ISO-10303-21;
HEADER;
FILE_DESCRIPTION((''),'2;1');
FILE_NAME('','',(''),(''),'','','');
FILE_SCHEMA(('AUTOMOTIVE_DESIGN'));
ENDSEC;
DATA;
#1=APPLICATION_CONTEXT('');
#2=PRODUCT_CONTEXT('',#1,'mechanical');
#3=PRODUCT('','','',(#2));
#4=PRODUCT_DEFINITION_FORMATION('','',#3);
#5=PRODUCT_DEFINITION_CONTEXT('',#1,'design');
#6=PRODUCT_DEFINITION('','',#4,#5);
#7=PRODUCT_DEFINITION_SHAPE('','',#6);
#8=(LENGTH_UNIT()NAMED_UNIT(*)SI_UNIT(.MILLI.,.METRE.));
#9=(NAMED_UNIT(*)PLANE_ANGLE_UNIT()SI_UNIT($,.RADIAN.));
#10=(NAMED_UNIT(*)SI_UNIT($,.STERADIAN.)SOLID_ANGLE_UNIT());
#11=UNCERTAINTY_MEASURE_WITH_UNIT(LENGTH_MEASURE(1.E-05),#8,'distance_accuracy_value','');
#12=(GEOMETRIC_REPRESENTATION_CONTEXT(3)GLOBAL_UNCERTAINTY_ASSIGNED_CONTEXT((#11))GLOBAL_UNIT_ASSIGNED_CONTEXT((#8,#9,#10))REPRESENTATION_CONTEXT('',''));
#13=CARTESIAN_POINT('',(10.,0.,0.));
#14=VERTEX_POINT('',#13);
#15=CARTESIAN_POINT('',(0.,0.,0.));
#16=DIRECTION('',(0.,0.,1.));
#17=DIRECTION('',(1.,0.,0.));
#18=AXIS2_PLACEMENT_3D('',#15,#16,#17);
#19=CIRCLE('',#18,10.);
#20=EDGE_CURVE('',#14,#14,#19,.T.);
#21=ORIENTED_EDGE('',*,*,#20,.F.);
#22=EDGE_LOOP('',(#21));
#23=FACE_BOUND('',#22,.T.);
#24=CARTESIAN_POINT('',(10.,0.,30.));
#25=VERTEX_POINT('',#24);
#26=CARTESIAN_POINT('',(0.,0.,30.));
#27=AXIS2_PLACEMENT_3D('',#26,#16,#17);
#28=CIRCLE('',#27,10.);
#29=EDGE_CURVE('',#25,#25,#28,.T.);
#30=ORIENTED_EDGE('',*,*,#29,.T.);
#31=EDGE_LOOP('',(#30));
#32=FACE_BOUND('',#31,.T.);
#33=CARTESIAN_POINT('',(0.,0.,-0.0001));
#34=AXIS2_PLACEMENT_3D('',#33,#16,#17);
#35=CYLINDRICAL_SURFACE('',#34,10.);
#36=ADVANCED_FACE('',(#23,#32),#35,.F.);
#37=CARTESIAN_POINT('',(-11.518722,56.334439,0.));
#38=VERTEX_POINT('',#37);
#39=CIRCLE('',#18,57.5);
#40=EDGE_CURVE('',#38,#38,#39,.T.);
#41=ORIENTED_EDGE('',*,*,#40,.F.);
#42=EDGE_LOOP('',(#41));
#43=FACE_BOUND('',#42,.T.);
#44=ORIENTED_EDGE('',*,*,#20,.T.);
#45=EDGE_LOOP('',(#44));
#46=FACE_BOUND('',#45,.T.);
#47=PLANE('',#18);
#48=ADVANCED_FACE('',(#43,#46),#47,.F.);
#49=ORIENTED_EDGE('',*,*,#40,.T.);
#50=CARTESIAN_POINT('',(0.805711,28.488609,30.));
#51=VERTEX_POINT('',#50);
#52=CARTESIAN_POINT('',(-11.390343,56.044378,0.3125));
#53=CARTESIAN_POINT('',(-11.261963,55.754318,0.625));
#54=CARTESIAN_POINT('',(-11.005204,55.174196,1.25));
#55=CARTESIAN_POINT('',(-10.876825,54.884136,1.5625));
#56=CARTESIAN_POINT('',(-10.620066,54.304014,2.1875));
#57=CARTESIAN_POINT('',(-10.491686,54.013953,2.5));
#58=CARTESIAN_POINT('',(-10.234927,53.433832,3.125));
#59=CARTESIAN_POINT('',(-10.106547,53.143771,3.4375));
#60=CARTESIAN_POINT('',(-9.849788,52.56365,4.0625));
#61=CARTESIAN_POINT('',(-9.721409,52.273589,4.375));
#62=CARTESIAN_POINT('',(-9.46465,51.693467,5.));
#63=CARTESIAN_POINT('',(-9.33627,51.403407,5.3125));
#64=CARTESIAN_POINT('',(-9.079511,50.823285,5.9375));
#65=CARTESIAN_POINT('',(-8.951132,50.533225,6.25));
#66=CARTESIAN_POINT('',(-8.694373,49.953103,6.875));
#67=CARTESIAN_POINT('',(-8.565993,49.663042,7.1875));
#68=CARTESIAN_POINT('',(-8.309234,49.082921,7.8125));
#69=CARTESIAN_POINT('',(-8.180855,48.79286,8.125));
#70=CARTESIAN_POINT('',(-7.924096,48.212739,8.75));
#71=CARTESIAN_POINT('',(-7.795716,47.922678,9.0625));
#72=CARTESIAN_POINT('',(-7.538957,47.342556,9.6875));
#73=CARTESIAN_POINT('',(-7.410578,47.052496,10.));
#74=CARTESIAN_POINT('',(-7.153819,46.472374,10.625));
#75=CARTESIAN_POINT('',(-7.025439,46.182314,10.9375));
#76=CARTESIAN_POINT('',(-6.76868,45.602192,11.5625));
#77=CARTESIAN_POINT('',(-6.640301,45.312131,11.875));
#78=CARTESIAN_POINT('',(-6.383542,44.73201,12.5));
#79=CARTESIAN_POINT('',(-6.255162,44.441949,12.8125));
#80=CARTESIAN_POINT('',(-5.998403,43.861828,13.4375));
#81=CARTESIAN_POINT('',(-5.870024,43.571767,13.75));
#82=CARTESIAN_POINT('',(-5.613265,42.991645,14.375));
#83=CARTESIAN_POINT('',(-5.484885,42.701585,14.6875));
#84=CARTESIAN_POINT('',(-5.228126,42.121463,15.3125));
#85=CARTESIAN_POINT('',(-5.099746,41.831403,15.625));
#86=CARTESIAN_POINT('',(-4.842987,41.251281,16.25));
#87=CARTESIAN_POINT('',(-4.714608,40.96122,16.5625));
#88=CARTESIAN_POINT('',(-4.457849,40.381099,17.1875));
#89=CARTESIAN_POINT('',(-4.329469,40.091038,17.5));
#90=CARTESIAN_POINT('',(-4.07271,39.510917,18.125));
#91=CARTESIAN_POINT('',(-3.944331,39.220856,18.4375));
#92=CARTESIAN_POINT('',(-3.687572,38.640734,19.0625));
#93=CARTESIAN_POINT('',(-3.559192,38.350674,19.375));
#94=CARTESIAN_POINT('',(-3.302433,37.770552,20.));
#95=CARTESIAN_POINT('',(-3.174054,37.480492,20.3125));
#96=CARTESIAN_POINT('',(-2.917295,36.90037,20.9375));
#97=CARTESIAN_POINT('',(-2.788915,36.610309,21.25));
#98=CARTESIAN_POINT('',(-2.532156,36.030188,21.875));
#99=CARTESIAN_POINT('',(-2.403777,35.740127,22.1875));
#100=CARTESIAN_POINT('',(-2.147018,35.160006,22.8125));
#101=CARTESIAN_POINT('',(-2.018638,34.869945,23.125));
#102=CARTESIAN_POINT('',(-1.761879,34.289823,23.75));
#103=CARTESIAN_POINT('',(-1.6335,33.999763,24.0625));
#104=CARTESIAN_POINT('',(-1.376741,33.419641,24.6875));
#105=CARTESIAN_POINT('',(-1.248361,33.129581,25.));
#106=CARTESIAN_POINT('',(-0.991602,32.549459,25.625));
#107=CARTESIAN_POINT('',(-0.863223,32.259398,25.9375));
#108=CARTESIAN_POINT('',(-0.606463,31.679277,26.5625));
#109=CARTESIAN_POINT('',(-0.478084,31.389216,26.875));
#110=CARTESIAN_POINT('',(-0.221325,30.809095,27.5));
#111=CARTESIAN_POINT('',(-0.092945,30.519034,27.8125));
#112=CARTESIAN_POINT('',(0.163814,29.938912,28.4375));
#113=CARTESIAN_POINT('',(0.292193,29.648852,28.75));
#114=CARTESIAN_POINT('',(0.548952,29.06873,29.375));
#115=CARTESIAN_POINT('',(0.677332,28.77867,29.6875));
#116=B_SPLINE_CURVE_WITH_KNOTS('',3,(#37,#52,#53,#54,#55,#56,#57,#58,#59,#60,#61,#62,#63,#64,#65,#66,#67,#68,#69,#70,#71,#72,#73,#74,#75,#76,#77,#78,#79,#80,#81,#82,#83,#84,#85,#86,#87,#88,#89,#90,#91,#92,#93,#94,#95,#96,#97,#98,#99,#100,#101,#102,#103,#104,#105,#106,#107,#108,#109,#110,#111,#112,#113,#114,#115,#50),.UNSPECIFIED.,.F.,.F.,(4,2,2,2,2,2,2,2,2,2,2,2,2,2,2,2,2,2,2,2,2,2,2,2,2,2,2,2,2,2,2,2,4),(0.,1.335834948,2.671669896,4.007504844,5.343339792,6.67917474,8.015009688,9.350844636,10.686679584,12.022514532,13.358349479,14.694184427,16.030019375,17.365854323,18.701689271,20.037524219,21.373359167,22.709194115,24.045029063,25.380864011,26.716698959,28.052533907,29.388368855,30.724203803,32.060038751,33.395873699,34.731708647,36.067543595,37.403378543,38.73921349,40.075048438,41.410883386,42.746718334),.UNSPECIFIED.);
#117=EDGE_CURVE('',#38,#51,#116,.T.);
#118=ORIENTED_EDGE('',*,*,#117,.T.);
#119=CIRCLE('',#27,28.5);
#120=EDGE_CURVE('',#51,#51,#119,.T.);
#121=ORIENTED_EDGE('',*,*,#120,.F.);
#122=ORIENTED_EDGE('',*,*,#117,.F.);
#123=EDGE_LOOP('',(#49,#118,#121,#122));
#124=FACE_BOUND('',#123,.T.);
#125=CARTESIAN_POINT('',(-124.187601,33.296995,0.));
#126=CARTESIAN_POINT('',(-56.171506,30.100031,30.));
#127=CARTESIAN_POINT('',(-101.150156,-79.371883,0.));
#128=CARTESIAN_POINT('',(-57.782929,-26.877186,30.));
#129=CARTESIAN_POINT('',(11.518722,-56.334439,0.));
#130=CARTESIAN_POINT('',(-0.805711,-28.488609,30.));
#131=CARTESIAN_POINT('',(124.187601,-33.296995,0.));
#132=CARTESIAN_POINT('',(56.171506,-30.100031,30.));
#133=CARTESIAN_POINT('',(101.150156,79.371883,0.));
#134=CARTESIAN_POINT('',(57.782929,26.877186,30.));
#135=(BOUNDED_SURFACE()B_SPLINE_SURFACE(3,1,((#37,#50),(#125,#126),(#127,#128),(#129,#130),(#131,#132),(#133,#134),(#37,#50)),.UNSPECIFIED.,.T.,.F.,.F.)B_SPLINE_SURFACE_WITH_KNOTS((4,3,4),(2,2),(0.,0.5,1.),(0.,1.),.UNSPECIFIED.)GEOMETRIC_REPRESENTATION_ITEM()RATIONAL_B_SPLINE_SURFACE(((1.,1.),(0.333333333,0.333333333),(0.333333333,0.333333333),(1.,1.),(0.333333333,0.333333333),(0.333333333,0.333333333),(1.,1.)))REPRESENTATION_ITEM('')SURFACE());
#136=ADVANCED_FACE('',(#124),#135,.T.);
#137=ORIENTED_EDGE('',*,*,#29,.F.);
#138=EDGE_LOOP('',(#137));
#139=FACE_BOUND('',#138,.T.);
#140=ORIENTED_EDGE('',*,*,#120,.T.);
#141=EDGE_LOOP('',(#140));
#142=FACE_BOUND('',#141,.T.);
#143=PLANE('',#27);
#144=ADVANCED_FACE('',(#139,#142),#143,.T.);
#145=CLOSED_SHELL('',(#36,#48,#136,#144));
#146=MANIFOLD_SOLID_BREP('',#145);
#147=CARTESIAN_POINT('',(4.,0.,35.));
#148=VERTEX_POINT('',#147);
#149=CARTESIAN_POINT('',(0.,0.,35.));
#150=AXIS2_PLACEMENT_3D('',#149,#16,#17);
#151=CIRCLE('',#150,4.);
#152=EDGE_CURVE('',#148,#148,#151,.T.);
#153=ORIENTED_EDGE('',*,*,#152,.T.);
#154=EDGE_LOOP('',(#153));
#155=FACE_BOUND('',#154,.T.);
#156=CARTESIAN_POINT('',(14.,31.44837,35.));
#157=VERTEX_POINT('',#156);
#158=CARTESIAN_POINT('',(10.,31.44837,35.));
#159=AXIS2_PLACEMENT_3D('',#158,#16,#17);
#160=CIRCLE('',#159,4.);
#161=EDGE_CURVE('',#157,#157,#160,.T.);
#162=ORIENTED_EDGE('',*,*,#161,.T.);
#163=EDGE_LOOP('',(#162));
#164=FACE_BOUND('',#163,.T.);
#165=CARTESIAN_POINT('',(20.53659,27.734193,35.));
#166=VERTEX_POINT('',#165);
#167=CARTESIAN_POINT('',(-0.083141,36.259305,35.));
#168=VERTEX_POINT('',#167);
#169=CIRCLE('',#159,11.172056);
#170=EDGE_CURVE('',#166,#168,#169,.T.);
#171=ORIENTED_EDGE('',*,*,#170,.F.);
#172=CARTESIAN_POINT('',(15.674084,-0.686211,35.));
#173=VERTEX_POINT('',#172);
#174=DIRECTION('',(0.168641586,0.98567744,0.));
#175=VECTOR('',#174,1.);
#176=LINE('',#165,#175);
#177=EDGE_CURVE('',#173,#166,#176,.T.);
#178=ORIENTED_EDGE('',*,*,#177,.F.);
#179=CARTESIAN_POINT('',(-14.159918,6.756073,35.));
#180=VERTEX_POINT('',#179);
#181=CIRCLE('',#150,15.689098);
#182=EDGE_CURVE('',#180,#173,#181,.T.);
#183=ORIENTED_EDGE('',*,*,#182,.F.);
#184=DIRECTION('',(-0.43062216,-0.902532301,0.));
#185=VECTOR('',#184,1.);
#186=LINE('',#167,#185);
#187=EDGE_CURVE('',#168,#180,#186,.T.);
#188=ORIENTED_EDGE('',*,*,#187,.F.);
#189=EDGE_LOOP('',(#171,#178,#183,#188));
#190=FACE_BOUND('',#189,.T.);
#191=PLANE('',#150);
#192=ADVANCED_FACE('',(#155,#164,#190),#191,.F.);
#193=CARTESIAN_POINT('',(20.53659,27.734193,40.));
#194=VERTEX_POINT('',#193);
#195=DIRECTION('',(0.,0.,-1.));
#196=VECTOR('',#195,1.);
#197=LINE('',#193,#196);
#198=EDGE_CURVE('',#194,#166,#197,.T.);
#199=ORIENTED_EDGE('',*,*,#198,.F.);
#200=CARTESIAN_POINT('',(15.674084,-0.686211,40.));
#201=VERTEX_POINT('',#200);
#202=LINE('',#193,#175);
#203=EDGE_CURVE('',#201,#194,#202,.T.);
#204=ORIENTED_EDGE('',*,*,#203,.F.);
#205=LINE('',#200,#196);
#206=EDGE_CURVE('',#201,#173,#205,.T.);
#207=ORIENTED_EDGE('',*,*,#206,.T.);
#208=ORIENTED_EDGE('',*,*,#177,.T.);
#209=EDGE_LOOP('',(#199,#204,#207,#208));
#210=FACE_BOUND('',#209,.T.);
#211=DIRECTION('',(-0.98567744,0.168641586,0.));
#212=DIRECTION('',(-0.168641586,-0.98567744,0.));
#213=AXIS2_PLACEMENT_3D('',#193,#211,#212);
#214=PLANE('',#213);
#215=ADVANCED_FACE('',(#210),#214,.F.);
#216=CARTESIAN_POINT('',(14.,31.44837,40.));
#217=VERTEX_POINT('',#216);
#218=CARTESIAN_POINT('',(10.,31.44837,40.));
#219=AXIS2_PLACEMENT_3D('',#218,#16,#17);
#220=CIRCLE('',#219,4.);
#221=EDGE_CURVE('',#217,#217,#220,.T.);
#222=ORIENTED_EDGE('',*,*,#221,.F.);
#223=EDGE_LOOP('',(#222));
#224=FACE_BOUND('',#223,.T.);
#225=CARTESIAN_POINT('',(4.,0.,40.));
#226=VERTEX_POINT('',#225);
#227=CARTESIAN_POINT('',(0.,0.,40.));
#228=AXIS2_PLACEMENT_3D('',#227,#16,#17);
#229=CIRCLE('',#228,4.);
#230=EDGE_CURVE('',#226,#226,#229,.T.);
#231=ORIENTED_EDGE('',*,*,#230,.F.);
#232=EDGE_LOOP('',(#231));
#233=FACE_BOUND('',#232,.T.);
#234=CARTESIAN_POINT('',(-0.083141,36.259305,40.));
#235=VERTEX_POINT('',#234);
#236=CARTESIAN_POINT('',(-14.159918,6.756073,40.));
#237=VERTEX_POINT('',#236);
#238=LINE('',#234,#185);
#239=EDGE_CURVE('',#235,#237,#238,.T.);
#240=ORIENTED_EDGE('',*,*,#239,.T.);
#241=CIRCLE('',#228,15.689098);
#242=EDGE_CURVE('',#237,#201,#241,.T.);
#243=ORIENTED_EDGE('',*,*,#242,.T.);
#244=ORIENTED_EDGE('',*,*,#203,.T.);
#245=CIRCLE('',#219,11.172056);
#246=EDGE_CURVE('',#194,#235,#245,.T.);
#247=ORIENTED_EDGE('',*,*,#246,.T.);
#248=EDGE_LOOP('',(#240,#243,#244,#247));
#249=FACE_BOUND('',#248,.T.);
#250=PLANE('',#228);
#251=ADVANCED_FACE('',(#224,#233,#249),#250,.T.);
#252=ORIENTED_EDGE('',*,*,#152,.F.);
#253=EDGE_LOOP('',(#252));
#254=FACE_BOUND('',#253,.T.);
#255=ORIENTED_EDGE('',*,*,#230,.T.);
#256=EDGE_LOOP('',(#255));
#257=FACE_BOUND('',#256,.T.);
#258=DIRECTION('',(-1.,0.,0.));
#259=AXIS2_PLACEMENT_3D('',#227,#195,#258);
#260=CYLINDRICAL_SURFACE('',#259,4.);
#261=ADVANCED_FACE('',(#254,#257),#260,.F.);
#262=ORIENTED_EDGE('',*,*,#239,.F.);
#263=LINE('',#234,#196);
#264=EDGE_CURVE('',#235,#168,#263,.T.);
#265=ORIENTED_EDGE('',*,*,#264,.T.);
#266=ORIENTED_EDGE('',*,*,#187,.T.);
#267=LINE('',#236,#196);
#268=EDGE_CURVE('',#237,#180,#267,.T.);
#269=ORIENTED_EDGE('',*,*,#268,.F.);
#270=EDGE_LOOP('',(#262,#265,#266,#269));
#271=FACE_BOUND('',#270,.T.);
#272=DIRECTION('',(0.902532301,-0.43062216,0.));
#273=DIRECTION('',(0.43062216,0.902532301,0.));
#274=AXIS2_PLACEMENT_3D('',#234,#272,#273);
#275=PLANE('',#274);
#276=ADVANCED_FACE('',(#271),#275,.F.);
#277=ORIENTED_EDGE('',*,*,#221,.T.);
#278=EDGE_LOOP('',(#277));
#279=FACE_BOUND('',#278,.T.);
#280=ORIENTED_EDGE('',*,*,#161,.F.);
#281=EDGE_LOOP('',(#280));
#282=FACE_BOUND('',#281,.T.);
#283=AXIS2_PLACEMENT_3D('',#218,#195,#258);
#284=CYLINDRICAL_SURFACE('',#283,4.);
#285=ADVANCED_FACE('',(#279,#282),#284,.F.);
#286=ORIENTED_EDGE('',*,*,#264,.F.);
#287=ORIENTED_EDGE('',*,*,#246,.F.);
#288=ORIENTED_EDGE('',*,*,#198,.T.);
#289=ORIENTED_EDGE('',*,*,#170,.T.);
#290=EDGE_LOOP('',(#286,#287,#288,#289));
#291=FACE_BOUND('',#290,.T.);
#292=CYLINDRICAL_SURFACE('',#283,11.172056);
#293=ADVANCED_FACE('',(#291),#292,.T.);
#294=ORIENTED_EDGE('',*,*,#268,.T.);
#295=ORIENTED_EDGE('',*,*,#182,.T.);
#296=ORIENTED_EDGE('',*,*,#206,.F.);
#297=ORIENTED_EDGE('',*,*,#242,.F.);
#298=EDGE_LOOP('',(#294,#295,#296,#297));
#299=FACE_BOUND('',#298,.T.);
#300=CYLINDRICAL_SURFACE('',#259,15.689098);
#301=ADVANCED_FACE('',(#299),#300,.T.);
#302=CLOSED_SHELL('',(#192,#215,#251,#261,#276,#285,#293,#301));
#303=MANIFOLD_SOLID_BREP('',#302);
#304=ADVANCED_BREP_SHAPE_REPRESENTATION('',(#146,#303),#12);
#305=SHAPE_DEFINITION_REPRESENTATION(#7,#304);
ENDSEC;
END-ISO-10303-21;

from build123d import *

# Parameters (mm, degrees)
SKETCH3_R           = 10
CUT_EXTRUDE1_DEPTH  = 87.674679284
SKETCH5_R           = 4
BOSS_EXTRUDE1_DEPTH = 5


with BuildPart() as part:
    # Loft1: read off the stored shape, not the designer's step
    # Loft1: loft between two sections, ruled curve by curve
    loft1_from = [
        Edge.make_bspline([(-11.518722123, 56.334439206, 0), (-124.187600535, 33.29699496, 0), (-101.150156289, -79.371883452, 0), (11.518722123, -56.334439206, 0), (124.187600535, -33.29699496, 0), (101.150156289, 79.371883452, 0), (-11.518722123, 56.334439206, 0)], [0, 0, 0, 0, 0.5, 0.5, 0.5, 1, 1, 1, 1], 3, [1, 0.333333333, 0.333333333, 1, 0.333333333, 0.333333333, 1]),
    ]
    loft1_to = [
        Edge.make_bspline([(0.805711153, 28.488608768, 30), (-56.171506383, 30.100031074, 30), (-57.782928689, -26.877186462, 30), (-0.805711153, -28.488608768, 30), (56.171506383, -30.100031074, 30), (57.782928689, 26.877186462, 30), (0.805711153, 28.488608768, 30)], [0, 0, 0, 0, 0.5, 0.5, 0.5, 1, 1, 1, 1], 3, [1, 0.333333333, 0.333333333, 1, 0.333333333, 0.333333333, 1]),
    ]
    loft1 = Solid(Shell([*[Face.make_surface_from_curves(loft1_from[k], loft1_to[k]) for k in range(1)], Face(Wire(loft1_from)), Face(Wire(loft1_to))]))
    add(loft1)

    # Sketch3 → Cut-Extrude1 (cut, through all)
    with BuildSketch(Plane.XY.offset(30)):
        Circle(SKETCH3_R)
    extrude(amount=-CUT_EXTRUDE1_DEPTH, mode=Mode.SUBTRACT)


with BuildPart() as body_2:
    # Sketch5 → Boss-Extrude1 (new body)
    with BuildSketch(Plane.XY.offset(35)):
        with BuildLine():
            Line((20.53658968, 27.734193457), (15.674084092, -0.686210928))
            ThreePointArc((15.674084092, -0.686210928), (-3.79737719, -15.222605691), (-14.159917768, 6.756073293))
            Line((-14.159917768, 6.756073293), (-0.083141296, 36.25930522))
            ThreePointArc((-0.083141296, 36.25930522), (14.268581322, 41.772809638), (20.53658968, 27.734193457))
        make_face()
        with Locations((10, 31.448370387)):
            Circle(SKETCH5_R, mode=Mode.SUBTRACT)
        Circle(SKETCH5_R, mode=Mode.SUBTRACT)
    extrude(amount=BOSS_EXTRUDE1_DEPTH)


solid = Compound([part.part, body_2.part])
